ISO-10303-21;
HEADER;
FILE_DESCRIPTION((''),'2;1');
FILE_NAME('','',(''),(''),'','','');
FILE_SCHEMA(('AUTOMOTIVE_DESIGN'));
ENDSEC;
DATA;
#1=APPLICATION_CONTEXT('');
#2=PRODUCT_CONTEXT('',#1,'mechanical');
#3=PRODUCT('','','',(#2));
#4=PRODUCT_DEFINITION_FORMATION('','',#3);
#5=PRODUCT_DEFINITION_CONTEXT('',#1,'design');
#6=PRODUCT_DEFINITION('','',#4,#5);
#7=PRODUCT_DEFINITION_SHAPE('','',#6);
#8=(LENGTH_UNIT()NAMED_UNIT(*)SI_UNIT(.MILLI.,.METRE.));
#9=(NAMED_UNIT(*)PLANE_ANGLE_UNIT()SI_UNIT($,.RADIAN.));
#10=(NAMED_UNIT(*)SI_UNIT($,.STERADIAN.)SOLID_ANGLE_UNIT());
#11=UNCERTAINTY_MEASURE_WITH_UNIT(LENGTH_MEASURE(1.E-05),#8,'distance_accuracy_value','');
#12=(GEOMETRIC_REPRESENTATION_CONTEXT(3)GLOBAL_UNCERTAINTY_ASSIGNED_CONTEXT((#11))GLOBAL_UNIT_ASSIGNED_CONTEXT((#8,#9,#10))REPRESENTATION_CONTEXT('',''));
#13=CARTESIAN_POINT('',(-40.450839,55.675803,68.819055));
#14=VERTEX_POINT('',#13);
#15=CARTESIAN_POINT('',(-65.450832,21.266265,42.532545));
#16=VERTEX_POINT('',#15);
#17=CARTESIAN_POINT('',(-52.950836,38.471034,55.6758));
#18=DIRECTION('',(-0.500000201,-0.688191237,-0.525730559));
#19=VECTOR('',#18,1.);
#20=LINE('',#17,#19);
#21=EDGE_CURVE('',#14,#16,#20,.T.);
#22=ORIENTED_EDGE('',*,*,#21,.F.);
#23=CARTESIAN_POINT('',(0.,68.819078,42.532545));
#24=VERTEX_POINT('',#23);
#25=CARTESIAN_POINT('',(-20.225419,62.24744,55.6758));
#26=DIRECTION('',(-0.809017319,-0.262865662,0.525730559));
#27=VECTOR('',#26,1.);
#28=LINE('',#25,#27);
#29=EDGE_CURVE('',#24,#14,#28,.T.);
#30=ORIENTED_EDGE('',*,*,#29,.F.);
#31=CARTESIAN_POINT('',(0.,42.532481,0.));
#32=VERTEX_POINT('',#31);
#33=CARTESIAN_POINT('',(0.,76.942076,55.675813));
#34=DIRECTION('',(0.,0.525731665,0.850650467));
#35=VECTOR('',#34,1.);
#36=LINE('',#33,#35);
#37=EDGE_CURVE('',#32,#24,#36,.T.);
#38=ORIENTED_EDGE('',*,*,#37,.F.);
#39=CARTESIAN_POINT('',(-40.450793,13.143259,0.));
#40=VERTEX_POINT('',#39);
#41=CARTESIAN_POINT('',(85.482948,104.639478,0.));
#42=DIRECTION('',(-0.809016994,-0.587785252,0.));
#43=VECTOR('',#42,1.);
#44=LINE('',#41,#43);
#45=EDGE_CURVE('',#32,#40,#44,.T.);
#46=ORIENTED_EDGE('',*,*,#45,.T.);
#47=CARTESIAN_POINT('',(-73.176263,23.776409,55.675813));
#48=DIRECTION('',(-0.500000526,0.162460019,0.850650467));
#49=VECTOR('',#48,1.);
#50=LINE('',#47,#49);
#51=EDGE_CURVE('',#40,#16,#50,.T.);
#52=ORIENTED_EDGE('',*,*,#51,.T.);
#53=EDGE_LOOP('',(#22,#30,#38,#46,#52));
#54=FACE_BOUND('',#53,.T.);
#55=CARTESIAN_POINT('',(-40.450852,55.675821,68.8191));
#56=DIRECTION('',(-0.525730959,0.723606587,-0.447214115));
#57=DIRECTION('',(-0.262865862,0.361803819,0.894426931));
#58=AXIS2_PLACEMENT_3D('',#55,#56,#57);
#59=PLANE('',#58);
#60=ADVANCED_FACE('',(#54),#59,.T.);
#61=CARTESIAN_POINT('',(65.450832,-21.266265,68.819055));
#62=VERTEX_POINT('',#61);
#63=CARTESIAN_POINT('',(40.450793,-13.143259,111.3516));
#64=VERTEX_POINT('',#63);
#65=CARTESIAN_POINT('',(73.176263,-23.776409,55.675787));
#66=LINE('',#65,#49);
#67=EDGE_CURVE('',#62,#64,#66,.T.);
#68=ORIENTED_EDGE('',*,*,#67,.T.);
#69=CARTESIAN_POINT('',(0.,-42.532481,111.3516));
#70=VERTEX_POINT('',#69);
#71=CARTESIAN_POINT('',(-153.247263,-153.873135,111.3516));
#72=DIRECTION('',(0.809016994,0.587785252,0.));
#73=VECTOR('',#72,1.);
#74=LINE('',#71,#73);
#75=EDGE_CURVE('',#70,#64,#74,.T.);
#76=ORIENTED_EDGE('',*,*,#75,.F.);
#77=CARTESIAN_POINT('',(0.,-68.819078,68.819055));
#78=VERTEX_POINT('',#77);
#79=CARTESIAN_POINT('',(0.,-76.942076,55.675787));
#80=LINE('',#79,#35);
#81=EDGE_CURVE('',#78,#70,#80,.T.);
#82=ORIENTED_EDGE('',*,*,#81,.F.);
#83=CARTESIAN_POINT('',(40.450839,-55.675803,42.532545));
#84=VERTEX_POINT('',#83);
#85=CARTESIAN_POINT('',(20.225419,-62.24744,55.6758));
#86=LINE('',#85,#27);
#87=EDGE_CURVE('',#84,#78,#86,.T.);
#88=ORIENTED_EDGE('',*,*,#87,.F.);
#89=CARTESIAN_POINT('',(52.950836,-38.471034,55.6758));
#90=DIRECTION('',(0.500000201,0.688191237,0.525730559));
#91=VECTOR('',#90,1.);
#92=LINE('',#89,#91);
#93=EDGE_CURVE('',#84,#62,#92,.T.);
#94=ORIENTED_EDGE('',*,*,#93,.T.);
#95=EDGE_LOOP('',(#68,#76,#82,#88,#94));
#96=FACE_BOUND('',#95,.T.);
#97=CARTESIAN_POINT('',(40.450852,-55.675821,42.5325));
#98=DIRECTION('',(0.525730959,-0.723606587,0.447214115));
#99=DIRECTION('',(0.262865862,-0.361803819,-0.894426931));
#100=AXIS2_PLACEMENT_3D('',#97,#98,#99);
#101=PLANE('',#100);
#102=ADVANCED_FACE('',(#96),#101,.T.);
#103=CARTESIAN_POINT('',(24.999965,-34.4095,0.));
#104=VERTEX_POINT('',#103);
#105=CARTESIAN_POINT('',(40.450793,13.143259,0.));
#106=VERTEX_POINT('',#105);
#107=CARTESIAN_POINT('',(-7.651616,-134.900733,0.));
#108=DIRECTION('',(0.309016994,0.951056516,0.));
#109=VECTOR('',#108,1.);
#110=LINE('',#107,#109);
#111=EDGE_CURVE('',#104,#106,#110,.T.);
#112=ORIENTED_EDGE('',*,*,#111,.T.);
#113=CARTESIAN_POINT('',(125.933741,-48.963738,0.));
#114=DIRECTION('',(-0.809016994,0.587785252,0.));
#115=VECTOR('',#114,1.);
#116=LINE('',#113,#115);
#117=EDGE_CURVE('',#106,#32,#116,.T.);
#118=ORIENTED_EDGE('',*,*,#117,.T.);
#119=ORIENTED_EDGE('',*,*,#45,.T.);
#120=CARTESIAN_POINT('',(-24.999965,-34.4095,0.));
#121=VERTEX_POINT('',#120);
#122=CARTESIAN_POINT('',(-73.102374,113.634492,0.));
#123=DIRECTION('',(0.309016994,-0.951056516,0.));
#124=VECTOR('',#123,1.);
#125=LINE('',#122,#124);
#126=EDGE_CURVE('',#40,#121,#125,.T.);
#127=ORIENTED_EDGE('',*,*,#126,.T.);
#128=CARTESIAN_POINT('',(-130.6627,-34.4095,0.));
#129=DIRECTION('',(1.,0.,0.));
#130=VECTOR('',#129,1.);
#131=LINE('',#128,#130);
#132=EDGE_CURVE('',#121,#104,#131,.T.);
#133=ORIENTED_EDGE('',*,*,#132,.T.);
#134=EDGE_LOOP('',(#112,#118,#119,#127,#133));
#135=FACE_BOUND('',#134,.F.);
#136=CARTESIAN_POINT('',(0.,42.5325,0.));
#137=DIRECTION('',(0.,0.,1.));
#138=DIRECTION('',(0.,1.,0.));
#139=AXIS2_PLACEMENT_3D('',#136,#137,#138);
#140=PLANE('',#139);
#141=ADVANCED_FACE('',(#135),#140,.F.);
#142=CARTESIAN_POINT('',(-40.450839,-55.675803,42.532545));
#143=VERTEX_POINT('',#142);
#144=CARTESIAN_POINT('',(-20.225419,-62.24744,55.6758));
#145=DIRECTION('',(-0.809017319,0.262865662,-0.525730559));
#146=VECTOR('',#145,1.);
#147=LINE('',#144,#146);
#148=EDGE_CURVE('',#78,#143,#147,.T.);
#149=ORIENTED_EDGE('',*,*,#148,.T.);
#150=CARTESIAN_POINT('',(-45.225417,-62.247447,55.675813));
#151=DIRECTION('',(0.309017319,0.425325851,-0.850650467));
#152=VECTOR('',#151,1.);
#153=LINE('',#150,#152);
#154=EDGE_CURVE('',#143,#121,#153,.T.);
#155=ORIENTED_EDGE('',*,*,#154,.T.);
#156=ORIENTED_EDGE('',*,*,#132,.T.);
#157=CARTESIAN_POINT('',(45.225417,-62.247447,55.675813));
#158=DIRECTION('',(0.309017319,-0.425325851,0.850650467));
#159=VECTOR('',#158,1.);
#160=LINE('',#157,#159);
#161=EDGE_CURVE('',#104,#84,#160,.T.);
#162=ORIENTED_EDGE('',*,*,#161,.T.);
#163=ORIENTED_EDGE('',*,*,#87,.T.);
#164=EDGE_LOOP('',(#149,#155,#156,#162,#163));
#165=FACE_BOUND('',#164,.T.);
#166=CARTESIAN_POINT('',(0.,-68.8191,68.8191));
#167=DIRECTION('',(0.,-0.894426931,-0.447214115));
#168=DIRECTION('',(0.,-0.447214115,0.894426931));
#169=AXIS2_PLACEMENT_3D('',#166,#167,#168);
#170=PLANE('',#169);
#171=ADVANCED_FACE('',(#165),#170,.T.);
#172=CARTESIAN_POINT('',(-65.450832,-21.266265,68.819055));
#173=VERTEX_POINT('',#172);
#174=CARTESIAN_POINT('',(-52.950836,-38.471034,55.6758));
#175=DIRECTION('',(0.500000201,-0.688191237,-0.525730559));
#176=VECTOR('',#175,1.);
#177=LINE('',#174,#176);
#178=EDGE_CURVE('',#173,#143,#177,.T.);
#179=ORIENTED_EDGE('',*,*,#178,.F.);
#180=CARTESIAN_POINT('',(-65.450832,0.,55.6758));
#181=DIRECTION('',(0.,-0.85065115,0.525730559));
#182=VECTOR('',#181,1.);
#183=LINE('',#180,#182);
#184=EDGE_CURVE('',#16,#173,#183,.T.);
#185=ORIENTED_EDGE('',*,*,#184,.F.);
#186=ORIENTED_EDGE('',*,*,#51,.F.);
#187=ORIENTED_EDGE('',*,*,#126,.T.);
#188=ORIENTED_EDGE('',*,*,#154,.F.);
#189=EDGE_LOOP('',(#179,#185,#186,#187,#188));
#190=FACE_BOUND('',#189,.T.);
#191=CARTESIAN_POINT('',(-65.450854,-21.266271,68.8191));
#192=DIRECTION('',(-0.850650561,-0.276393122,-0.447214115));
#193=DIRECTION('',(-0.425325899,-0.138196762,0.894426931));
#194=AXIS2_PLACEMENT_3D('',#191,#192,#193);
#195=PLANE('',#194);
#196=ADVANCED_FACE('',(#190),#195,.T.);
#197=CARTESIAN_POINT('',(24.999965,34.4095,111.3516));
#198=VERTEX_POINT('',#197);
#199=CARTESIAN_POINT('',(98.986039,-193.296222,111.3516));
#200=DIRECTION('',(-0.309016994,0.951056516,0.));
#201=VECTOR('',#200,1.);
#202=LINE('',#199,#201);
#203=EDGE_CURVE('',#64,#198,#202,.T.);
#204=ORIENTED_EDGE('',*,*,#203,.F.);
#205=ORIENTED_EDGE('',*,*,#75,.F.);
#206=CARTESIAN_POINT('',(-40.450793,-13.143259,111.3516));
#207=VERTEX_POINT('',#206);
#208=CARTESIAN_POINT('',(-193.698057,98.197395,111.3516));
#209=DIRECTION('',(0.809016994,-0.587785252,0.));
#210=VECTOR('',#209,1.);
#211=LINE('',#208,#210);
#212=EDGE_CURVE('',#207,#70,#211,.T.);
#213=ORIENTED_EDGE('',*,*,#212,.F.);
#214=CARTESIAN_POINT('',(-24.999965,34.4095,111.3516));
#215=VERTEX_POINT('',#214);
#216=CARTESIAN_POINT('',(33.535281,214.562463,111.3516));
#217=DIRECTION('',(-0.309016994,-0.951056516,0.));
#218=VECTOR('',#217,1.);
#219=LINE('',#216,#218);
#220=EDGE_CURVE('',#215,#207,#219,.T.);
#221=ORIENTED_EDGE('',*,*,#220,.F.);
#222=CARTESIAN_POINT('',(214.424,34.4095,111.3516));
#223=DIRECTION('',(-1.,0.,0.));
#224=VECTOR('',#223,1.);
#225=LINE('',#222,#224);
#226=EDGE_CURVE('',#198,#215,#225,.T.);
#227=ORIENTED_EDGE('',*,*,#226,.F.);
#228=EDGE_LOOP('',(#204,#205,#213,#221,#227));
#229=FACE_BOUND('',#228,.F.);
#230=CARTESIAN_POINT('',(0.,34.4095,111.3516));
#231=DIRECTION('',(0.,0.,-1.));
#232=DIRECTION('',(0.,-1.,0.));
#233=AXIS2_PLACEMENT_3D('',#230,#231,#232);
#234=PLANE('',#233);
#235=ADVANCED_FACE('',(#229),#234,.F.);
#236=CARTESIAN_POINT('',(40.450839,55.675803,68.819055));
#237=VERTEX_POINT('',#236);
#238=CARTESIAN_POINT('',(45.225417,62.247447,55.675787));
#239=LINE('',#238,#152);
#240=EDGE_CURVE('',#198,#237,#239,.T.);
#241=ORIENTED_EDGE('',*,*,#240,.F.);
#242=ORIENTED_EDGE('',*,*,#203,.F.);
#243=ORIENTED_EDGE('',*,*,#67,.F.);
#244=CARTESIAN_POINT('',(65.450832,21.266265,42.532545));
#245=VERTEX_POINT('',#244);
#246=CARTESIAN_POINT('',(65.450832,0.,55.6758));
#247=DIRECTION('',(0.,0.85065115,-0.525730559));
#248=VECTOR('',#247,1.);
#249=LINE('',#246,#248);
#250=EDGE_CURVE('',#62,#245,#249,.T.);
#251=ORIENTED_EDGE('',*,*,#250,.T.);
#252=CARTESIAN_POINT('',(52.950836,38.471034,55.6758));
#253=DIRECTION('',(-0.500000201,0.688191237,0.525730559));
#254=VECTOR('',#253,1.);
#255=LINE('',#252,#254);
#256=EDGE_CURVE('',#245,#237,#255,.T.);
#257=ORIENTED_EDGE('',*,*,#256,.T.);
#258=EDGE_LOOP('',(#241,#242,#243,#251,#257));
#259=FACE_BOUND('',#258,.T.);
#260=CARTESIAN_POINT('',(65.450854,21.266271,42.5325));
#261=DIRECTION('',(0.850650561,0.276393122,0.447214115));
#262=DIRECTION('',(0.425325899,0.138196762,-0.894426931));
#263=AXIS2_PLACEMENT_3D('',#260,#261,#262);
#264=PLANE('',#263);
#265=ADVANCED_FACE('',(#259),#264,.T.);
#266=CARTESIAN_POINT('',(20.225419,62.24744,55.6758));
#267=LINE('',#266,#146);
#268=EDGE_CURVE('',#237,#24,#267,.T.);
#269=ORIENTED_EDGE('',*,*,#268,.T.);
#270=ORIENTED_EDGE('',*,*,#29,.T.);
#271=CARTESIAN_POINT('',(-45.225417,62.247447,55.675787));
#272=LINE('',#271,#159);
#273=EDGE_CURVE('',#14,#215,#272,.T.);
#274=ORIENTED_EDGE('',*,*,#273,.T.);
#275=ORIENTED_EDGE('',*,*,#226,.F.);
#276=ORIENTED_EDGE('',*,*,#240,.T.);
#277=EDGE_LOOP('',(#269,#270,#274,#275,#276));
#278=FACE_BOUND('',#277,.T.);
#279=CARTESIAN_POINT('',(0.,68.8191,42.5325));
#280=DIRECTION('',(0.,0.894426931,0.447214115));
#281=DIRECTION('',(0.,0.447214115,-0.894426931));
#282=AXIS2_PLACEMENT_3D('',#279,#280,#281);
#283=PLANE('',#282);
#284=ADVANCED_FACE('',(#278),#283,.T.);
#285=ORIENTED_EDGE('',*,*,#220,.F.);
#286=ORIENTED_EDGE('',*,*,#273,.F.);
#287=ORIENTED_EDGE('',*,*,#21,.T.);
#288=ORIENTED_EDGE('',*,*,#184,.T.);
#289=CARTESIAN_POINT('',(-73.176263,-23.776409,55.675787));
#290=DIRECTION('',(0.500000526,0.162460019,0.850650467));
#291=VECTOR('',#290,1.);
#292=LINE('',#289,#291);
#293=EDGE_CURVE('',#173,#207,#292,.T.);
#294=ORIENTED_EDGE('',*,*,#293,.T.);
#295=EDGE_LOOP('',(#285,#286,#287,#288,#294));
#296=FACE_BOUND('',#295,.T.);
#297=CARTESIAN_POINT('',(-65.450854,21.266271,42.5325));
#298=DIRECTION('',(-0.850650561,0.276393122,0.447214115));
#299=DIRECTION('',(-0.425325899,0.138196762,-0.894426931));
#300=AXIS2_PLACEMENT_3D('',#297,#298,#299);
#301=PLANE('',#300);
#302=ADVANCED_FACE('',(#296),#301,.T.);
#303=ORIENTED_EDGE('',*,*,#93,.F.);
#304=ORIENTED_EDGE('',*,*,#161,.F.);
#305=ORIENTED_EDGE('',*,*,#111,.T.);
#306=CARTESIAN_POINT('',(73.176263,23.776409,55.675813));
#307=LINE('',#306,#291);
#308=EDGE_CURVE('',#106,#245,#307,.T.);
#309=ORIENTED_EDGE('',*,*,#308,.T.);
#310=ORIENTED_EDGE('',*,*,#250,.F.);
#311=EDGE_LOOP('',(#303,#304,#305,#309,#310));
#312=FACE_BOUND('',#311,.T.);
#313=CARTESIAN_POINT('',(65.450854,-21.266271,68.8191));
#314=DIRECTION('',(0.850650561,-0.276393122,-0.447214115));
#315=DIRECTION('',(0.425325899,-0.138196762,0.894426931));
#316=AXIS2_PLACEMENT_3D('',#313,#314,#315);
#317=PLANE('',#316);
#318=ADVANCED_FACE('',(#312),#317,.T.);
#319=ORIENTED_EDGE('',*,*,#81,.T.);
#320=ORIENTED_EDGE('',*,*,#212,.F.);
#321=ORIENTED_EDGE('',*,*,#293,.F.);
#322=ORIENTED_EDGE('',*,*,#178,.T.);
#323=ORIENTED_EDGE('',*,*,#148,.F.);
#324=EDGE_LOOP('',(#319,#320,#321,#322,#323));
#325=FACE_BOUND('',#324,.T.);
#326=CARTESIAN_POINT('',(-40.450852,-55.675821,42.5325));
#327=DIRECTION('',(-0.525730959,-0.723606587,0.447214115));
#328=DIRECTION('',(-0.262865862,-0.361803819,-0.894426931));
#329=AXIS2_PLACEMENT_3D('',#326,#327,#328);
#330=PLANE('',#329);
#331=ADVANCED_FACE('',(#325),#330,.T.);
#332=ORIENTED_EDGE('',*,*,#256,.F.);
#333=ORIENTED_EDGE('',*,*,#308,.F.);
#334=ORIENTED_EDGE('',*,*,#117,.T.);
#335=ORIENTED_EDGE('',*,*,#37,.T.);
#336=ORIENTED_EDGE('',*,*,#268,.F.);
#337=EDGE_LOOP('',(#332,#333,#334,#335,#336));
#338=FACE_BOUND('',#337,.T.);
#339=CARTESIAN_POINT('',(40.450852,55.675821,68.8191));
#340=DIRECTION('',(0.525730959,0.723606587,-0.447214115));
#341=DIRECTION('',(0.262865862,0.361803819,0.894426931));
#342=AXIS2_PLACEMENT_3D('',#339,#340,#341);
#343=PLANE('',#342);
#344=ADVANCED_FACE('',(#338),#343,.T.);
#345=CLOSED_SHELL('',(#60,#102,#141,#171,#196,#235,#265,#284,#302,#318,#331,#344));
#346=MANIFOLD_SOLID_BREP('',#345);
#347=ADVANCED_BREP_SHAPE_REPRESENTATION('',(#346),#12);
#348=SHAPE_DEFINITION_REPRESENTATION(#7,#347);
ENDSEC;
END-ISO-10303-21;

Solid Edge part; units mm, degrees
sketch "Sketch1" plane through (0, 0, 0) normal (0, -1, 0) x (1, 0, 0)
  line L0 (0, 124.5225) -> (0, -124.5225)
  arc A0 (0, 124.5225) -> (0, -124.5225) centre (0, 0) cw
revolve "RevolvedProtrusion1" add sketch "Sketch1" angle 360 about axis through (0, 0, 124.5225) along (0, 0, -1)
sketch "Sketch2" plane through (0, 0, 0) normal (1, 0, 0) x (0, 1, 0)
  line L0 (34.4095, 111.3516) -> (-42.5325, 111.3516)
  line L1 (68.8191, 42.5325) -> (34.4095, 111.3516)
extrude "Cutout1" cut sketch "Sketch2" along normal mid plane 428.848 material side at (0, -4.0615, 111.4016)
sketch "Sketch3" plane through (0, 0, 0) normal (1, 0, 0) x (0, 1, 0)
  line L0 (-34.4095, 0) -> (42.5325, 0)
  line L1 (-68.8191, 68.8191) -> (-34.4095, 0)
extrude "ExtrudedCutout_12" cut sketch "Sketch3" along normal mid plane 261.3254 material side at (0, 4.0615, -0.05)
pattern_circular "Pattern1" count 5 over 360 about axis through (0, 0, 0) along (0, 0, 1) of "Cutout1", "ExtrudedCutout_12"
